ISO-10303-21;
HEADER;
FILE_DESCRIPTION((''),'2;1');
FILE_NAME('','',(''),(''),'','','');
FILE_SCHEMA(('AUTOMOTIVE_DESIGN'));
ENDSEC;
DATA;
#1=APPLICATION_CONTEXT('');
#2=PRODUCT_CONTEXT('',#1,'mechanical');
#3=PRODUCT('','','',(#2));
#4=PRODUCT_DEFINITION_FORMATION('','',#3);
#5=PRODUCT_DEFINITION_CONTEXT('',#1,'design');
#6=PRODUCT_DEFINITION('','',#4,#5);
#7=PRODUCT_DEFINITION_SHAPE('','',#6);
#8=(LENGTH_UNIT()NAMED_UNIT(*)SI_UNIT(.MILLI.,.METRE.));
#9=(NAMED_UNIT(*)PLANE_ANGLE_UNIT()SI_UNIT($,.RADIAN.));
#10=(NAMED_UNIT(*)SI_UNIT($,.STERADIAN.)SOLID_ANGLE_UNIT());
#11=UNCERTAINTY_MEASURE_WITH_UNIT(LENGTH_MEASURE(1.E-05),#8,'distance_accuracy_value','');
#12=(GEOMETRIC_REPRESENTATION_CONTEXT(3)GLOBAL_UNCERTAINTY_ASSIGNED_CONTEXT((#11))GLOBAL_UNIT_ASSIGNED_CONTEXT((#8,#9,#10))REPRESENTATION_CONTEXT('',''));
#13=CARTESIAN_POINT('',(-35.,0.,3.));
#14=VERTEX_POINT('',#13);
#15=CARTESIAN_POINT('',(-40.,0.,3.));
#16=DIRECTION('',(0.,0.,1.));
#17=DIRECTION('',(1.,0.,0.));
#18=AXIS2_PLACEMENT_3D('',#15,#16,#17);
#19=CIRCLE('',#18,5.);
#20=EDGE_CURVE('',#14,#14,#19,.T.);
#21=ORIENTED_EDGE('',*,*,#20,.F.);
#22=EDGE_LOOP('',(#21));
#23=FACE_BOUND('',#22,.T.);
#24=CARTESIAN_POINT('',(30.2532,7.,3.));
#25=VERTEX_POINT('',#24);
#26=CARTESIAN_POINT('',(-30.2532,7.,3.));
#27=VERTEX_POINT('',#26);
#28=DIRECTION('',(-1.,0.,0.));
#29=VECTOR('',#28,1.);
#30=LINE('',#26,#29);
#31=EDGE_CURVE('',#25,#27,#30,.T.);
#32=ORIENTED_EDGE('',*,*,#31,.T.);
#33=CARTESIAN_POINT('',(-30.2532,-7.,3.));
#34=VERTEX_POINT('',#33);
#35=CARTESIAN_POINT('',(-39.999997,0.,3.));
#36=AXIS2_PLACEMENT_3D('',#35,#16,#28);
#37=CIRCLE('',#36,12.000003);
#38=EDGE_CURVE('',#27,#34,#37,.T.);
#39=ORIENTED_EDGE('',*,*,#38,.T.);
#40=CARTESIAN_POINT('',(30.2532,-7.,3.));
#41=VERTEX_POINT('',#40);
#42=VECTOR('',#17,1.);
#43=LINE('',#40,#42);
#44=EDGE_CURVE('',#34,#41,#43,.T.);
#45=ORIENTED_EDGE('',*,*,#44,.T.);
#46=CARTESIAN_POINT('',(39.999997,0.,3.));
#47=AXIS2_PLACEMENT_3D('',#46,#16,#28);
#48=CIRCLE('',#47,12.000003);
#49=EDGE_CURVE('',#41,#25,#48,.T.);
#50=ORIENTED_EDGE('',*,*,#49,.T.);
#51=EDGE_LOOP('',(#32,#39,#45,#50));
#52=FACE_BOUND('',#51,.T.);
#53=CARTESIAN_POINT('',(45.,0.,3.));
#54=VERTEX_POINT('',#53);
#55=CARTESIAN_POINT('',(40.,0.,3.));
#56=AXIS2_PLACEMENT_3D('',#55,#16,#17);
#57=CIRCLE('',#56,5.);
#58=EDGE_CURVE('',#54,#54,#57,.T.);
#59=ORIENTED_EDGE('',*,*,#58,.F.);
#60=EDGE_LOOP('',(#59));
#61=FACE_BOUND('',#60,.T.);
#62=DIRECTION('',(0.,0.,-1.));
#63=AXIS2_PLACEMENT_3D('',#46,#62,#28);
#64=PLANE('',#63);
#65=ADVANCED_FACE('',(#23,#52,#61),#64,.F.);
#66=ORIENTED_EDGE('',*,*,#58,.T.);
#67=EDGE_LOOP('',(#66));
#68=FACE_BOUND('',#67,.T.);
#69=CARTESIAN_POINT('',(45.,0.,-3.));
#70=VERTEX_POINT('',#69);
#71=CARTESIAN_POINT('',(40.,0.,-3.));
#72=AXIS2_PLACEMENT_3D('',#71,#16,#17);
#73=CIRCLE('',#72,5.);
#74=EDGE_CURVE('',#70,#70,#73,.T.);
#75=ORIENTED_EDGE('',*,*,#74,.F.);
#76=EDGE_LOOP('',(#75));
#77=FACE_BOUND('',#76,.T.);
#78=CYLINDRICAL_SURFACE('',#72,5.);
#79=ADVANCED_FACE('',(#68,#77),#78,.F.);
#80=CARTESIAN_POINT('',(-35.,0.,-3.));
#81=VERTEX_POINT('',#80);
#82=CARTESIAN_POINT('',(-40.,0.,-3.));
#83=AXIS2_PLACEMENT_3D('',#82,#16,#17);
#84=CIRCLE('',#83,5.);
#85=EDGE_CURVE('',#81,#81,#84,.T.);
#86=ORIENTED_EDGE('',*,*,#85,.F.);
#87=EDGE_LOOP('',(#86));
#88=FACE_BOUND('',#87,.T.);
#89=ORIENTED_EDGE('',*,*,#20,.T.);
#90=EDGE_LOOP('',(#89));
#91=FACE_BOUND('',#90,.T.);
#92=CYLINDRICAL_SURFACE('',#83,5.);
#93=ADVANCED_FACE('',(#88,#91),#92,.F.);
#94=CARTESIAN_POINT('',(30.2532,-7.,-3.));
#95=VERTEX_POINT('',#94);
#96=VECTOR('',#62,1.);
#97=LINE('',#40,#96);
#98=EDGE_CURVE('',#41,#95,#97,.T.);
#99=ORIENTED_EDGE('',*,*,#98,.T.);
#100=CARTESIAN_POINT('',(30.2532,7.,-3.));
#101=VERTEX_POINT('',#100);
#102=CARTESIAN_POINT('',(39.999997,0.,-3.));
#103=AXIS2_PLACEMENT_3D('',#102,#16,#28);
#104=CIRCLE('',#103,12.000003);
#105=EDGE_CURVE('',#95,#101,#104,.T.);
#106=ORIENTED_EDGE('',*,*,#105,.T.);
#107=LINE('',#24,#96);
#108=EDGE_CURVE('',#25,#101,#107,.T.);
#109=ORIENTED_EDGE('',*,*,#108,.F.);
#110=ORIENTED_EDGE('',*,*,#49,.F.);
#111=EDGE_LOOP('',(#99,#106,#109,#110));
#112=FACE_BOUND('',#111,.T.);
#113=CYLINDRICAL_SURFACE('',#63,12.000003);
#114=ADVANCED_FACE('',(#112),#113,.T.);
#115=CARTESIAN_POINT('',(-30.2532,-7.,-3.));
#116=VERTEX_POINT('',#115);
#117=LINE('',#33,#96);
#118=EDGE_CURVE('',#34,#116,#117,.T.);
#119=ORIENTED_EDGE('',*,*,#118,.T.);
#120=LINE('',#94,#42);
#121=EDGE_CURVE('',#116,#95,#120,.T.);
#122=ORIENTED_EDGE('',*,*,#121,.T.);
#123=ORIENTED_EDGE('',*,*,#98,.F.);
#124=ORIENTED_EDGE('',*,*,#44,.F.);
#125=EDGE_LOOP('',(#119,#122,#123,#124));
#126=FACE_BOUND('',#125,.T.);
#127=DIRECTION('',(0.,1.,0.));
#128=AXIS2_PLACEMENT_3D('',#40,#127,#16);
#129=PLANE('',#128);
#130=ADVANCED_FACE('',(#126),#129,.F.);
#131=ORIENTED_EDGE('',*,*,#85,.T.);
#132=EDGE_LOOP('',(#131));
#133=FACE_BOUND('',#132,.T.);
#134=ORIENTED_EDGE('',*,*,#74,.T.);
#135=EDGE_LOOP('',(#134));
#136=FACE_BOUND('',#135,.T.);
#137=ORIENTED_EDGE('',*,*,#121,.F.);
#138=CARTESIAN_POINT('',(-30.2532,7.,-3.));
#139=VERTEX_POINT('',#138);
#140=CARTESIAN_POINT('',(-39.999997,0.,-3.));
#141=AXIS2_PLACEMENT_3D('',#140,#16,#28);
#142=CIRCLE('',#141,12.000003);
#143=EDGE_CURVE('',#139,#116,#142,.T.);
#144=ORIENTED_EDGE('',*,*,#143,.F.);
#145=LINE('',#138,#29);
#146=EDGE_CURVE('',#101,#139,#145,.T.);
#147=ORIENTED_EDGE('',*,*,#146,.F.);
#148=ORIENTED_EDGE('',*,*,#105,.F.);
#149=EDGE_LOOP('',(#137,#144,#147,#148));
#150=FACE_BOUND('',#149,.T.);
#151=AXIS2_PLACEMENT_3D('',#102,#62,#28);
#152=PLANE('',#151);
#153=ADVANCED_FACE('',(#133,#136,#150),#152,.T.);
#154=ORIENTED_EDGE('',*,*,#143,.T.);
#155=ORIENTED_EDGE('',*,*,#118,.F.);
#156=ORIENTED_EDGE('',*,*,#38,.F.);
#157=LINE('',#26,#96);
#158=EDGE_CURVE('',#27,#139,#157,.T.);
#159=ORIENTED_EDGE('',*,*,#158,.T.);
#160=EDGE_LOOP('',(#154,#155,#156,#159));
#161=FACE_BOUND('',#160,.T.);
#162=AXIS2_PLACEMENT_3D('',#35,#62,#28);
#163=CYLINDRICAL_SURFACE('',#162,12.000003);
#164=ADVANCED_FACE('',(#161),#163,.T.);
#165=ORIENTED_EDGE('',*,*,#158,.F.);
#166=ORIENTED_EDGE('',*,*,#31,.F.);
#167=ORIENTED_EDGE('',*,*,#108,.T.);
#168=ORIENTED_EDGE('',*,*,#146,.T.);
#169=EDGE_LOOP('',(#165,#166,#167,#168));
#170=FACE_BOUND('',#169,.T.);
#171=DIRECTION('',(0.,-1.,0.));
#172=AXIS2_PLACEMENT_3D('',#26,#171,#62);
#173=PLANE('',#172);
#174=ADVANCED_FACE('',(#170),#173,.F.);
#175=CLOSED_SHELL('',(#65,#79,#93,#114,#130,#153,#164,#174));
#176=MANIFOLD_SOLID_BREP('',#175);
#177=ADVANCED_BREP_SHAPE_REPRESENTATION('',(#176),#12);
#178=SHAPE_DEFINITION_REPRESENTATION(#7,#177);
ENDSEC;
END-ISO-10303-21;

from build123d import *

# Parameters (mm, degrees)
EXTRUDE_START       = -3
EXTRUDE_1_DEPTH     = 6
SKETCH_2_R          = 5
CUT_EXTRUDE_1_DEPTH = 54.702886895


# Read off the part's stored shape, not the designer's step: 凸台-拉伸1
with BuildPart() as part:
    # 凸台-拉伸1 outline → 凸台-拉伸1 (new body)
    with BuildSketch(Plane.XY.offset(EXTRUDE_START)):
        with BuildLine():
            ThreePointArc((30.2532, -7), (52, 0), (30.2532, 7))
            Line((30.2532, 7), (-30.2532, 7))
            ThreePointArc((-30.2532, 7), (-52, 0), (-30.2532, -7))
            Line((-30.2532, -7), (30.2532, -7))
        make_face()
    extrude(amount=EXTRUDE_1_DEPTH)

    # 草图2 → 切除-拉伸1 (cut, through all)
    with BuildSketch(Plane.XY.offset(3)):
        with Locations((-40, 0)):
            Circle(SKETCH_2_R)
        with Locations((40, 0)):
            Circle(SKETCH_2_R)
    extrude(amount=-CUT_EXTRUDE_1_DEPTH, mode=Mode.SUBTRACT)


solid = part.part
